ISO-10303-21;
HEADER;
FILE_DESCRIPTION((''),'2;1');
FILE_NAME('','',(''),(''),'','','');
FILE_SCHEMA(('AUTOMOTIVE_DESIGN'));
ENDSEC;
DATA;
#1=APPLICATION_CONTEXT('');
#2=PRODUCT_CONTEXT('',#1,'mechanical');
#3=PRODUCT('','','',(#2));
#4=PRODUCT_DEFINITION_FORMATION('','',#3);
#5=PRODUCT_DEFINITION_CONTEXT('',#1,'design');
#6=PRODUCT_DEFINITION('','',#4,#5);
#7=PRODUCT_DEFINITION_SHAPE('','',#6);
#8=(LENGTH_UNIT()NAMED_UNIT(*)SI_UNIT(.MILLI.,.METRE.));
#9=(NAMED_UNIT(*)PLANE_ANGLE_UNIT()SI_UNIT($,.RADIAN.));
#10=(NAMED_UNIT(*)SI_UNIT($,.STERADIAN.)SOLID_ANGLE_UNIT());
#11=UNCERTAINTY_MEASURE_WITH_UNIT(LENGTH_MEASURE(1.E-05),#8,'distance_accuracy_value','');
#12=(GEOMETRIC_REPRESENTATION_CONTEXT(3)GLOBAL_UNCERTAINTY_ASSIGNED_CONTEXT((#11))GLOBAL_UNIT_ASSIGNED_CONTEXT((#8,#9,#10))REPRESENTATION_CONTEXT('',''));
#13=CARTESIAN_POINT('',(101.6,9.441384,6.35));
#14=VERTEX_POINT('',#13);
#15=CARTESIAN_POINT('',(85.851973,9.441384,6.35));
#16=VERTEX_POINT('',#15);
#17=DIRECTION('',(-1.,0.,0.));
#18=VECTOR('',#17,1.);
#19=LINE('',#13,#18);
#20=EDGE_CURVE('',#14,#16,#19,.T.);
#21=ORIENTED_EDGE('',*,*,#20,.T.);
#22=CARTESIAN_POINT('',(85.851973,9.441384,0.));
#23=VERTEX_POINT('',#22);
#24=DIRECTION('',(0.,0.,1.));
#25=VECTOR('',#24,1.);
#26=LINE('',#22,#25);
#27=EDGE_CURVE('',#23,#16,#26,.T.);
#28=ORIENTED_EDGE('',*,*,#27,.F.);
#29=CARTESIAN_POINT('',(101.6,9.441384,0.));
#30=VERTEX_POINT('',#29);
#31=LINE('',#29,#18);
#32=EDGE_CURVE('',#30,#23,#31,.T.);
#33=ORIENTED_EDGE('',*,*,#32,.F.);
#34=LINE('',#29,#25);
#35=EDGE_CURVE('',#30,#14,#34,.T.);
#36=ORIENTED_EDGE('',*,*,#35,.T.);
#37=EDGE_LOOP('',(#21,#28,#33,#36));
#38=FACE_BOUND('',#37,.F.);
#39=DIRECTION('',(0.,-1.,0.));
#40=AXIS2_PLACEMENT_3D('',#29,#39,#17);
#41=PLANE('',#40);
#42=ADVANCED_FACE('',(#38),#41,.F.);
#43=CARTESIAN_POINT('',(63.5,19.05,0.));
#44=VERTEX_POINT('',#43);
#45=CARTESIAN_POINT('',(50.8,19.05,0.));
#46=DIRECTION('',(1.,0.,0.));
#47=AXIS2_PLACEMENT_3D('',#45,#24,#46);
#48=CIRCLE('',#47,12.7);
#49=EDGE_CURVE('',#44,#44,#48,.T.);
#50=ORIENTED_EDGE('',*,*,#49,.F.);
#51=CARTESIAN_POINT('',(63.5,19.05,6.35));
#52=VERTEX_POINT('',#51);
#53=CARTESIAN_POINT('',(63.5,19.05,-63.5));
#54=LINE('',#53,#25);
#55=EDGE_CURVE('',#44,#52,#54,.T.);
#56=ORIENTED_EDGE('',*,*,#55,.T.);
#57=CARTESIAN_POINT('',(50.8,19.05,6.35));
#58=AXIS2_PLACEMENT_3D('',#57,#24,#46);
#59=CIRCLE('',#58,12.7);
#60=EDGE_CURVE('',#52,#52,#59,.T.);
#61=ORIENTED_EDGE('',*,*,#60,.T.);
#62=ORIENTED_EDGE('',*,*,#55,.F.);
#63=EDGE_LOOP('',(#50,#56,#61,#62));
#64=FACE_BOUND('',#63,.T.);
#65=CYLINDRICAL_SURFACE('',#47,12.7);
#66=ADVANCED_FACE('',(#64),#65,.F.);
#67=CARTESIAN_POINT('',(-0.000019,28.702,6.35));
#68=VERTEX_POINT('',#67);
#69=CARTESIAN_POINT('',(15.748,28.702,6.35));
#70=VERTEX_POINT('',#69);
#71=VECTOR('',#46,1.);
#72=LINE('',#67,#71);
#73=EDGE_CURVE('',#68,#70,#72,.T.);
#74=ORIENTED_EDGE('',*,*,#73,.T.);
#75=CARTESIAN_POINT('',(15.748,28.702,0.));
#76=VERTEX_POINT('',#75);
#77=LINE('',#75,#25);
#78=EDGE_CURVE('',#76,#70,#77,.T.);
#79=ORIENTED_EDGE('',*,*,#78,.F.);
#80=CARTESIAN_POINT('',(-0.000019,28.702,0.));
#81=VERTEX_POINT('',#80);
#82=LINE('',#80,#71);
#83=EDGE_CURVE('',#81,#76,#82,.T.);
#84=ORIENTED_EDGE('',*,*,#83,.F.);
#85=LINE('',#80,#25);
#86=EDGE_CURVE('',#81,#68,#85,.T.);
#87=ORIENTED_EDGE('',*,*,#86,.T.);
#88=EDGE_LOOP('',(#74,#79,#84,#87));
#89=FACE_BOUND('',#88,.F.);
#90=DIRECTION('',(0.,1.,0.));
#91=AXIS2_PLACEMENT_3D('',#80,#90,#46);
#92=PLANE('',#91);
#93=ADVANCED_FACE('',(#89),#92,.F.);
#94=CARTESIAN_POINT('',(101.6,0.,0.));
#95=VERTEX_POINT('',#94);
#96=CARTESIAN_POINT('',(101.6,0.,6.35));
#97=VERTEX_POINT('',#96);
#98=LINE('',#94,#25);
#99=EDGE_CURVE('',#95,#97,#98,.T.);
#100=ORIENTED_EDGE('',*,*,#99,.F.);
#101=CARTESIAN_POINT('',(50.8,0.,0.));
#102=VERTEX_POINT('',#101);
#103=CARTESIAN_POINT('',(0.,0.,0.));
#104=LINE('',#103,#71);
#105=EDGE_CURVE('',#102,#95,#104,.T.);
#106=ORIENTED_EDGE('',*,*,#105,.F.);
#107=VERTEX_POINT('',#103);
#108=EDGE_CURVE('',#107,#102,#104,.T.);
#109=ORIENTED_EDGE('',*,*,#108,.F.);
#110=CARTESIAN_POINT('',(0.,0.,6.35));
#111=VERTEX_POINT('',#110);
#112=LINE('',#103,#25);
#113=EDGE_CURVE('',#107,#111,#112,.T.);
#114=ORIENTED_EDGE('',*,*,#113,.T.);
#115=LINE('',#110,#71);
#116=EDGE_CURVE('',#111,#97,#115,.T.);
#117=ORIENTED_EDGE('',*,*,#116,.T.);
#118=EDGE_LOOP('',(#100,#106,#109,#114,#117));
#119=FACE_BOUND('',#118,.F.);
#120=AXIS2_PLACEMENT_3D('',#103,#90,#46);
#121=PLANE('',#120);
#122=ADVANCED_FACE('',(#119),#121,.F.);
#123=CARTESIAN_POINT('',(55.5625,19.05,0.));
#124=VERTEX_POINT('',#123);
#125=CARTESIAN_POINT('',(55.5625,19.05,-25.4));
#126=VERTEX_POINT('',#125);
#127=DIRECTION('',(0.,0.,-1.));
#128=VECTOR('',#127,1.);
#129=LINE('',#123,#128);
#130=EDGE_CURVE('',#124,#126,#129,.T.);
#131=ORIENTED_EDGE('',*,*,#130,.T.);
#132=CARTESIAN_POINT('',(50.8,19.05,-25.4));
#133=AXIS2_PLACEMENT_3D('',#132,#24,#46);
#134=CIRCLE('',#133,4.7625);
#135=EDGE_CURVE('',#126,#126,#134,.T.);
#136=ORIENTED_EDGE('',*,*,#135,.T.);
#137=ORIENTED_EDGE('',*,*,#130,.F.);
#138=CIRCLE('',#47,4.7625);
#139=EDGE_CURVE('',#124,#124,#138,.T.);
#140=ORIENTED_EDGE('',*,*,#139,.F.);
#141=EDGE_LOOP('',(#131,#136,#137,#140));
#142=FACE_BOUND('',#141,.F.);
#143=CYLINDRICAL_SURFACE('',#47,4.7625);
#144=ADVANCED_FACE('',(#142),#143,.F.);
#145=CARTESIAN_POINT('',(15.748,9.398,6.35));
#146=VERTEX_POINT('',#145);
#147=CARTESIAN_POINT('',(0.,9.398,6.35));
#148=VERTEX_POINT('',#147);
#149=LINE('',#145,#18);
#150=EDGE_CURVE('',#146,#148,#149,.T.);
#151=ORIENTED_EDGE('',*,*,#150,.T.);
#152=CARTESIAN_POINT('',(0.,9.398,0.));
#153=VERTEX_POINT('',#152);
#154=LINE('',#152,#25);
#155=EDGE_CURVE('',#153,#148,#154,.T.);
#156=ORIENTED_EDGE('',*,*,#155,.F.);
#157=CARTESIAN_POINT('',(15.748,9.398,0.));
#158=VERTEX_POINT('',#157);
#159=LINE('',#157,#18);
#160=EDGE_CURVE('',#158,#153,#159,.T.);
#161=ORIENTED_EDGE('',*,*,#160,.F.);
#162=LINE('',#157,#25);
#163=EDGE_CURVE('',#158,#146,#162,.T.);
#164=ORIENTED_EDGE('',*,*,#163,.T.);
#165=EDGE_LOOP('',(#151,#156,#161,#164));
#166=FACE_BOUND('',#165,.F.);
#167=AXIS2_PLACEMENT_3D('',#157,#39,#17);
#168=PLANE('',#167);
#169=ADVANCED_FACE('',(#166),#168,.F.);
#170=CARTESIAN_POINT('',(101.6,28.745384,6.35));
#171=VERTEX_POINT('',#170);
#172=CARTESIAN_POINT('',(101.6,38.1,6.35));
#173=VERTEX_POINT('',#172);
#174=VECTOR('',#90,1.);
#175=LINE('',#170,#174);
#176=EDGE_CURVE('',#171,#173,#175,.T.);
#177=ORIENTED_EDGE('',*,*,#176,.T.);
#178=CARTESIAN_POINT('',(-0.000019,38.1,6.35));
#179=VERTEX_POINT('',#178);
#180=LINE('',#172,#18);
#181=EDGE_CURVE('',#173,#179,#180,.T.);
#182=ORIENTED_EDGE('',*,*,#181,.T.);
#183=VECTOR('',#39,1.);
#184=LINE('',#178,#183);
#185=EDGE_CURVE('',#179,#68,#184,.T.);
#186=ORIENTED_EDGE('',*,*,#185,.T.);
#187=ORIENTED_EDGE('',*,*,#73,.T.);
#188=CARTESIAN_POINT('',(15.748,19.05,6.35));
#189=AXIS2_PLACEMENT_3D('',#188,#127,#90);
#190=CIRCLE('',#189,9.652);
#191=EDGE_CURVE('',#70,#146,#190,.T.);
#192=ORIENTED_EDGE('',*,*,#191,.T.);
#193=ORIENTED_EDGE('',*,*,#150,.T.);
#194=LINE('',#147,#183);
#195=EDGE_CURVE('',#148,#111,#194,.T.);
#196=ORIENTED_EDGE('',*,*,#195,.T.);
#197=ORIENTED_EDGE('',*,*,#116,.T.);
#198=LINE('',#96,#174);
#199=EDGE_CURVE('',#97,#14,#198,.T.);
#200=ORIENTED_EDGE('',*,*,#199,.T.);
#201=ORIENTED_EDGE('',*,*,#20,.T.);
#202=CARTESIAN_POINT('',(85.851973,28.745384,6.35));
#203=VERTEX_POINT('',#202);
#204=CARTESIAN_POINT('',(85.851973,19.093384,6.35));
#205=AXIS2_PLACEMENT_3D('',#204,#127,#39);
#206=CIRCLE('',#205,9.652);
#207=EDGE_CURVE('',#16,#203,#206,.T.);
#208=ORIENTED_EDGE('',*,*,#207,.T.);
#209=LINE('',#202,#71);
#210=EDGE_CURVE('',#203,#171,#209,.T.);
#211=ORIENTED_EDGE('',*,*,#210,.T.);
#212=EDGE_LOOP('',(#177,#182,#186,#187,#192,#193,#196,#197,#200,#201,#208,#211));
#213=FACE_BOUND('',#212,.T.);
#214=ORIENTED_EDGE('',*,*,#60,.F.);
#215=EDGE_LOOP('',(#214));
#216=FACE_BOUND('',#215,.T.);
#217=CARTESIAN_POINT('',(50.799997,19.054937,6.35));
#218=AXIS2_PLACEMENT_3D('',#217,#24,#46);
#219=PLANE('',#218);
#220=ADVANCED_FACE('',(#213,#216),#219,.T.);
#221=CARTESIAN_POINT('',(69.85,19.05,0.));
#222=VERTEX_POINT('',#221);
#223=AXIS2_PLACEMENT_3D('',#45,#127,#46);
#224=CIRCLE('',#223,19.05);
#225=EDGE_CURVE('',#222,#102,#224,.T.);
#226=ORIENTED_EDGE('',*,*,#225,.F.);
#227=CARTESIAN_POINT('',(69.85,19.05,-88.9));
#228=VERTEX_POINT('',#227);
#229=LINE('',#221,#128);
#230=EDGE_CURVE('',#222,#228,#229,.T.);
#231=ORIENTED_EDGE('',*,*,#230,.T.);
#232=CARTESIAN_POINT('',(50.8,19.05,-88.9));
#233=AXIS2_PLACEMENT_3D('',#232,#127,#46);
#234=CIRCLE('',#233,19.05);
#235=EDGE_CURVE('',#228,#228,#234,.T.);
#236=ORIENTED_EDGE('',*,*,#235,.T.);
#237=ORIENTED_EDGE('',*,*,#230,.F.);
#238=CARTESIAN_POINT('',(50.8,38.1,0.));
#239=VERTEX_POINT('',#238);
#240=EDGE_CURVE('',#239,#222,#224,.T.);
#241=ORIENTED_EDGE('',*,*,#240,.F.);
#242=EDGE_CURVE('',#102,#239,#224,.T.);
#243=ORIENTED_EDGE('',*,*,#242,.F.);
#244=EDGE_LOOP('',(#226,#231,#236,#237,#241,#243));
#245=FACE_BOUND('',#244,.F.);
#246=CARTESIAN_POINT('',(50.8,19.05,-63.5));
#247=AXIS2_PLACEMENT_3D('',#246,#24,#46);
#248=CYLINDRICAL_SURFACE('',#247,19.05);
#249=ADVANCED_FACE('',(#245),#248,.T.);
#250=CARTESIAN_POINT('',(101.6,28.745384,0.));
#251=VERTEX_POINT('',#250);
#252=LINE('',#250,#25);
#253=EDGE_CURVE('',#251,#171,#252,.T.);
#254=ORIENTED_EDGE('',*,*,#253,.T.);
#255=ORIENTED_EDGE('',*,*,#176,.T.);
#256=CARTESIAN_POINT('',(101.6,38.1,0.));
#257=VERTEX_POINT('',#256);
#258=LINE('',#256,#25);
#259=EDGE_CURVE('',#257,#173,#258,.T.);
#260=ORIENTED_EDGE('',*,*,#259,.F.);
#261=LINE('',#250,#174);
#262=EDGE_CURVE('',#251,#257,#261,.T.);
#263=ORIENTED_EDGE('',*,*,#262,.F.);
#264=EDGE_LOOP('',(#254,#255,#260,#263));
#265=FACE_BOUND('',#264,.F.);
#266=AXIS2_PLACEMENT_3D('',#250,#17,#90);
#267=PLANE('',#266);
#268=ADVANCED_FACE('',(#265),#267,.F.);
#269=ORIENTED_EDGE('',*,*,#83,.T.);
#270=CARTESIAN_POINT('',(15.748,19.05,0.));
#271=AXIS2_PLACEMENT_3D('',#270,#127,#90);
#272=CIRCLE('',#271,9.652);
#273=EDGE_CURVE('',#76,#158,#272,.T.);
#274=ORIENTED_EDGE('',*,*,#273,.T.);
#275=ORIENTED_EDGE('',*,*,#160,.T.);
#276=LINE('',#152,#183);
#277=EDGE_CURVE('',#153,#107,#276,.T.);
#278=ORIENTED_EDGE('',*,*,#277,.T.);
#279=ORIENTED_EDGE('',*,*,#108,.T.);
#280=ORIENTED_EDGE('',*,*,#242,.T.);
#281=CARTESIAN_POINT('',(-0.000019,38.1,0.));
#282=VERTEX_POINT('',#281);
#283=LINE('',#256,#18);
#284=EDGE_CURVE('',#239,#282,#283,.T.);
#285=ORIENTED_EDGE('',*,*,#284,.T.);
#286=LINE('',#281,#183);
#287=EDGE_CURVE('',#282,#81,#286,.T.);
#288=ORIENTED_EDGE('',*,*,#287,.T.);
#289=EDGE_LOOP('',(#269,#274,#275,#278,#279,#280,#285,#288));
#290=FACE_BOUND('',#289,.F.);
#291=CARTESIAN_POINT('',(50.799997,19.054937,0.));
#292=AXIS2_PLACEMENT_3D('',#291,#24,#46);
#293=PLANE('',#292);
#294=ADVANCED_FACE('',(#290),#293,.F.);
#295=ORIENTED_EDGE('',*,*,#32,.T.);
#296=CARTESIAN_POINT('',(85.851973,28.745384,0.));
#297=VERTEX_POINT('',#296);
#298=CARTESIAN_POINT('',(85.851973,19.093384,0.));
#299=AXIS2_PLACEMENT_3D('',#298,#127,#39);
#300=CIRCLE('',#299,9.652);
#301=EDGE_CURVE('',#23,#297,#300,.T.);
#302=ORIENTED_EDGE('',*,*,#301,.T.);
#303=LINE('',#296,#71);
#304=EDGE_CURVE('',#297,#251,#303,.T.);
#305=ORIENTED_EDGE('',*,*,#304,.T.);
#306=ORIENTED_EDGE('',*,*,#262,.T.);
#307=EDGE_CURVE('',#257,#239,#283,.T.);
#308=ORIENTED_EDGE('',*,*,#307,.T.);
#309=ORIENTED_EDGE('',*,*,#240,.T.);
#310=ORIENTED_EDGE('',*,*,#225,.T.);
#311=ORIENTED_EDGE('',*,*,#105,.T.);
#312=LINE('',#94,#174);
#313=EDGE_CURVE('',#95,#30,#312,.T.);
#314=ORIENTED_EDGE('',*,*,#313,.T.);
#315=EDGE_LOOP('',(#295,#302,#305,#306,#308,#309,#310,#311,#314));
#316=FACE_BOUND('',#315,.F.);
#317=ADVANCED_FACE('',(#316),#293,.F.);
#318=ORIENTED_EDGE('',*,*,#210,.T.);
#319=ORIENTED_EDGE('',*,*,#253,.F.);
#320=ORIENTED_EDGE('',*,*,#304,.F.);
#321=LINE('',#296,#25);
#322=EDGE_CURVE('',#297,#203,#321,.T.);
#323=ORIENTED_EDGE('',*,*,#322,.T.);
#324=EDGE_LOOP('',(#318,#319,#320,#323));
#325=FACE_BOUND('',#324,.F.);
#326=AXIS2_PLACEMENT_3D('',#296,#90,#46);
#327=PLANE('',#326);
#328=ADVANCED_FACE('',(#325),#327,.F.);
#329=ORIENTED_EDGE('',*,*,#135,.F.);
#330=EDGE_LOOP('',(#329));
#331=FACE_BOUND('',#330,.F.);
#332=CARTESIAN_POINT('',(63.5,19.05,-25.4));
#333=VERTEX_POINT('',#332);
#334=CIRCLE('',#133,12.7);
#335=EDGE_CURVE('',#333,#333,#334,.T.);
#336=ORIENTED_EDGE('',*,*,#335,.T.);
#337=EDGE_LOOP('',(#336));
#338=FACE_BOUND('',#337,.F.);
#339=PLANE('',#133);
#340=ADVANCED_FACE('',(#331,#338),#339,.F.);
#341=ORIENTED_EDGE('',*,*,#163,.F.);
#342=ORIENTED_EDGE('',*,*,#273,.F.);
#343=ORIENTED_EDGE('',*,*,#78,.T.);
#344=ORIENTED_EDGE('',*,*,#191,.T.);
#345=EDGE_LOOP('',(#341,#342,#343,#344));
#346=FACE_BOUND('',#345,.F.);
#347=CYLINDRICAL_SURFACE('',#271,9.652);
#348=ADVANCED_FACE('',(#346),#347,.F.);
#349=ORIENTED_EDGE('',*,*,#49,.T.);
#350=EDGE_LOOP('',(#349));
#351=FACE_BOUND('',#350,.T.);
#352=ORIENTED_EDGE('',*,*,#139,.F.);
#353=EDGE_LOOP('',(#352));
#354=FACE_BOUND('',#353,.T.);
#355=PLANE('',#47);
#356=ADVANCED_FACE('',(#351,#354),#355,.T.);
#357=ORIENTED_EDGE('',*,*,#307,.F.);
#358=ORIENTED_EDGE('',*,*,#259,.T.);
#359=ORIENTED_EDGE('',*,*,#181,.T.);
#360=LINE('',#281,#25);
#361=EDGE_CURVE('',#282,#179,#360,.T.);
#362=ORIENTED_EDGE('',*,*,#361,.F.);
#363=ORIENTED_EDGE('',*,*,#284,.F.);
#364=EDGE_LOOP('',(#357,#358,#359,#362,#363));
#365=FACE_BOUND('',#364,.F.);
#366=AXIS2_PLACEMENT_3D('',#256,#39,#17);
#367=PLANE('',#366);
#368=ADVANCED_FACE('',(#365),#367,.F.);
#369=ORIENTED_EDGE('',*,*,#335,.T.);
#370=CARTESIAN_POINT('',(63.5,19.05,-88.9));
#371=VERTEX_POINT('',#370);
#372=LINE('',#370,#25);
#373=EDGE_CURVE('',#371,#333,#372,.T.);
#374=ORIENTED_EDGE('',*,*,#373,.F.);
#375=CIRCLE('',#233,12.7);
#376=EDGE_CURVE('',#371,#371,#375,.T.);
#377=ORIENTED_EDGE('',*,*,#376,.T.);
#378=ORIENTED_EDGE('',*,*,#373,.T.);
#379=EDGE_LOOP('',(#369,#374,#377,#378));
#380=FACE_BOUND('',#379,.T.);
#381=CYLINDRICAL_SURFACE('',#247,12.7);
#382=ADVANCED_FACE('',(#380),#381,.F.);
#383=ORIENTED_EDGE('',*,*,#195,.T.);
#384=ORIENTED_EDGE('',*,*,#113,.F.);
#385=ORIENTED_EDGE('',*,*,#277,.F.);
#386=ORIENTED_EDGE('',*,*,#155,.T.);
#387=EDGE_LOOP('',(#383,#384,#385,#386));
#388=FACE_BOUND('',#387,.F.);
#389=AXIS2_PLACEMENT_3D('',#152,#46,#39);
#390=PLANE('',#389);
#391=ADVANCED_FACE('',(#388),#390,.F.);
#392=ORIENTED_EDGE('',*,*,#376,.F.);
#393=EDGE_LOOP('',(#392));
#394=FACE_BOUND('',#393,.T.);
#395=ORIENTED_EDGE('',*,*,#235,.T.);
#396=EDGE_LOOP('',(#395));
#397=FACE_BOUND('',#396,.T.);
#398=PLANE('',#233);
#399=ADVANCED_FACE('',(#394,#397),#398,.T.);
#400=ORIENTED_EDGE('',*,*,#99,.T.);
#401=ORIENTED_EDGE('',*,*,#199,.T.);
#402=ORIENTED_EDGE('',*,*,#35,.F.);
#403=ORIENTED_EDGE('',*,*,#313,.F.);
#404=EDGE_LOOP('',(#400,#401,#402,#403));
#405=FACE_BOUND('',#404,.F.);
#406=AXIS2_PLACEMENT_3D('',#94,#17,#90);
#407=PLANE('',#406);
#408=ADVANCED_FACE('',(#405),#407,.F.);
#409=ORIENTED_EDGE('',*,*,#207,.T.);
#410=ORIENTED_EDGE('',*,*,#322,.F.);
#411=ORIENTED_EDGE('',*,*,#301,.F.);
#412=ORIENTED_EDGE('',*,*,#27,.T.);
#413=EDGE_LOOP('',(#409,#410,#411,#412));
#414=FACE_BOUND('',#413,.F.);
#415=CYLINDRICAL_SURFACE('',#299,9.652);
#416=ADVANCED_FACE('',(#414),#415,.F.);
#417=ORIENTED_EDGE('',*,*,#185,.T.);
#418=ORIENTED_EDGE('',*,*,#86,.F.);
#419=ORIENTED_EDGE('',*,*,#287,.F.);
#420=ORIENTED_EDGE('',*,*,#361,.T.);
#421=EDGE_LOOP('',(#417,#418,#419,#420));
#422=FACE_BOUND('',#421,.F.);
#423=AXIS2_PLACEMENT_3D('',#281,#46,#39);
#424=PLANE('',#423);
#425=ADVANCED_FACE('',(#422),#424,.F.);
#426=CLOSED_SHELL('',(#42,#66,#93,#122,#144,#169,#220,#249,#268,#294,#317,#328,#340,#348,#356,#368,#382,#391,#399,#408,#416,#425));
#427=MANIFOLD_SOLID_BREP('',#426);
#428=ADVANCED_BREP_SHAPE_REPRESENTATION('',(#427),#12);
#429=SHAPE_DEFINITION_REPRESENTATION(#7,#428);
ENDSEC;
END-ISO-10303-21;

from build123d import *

# Parameters (mm, degrees)
F0_R        = 12.7
F1_DEPTH    = 6.35
F2_R        = 12.7
F3_DEPTH    = 63.5
F3_FACE_R   = 19.05
F3_FACE_R_2 = 12.7
F4_R        = 19.05
F4_R_2      = 4.7625
F5_DEPTH    = 25.4


with BuildPart() as f1:
    # F0 (on Top) → F1 (new body)
    with BuildSketch(Plane.XY):
        with BuildLine():
            Line((0, 9.398), (0, 0))
            Line((0, 0), (101.6, 0))
            Line((101.6, 0), (101.6, 9.4413837329))
            Line((101.6, 9.4413837329), (85.851973152, 9.4413837329))
            ThreePointArc((85.851973152, 9.4413837329), (76.199973152, 19.0933837329), (85.851973152, 28.7453837329))
            Line((85.851973152, 28.7453837329), (101.6, 28.7453837329))
            Line((101.6, 28.7453837329), (101.6, 38.1))
            Line((101.6, 38.1), (50.7999907375, 38.1))
            Line((50.7999907375, 38.1), (-1.85251e-05, 38.1))
            Line((-1.85251e-05, 38.1), (-1.85251e-05, 28.702))
            Line((-1.85251e-05, 28.702), (15.748, 28.702))
            ThreePointArc((15.748, 28.702), (25.4, 19.05), (15.748, 9.398))
            Line((15.748, 9.398), (0, 9.398))
        make_face()
        with Locations((50.8, 19.05)):
            Circle(F0_R, mode=Mode.SUBTRACT)
    extrude(amount=F1_DEPTH)

    # F2 (on face) → F3 (join)
    with BuildSketch(Plane(origin=(0, 0, 0), x_dir=(1, 0, 0), z_dir=(0, 0, -1))):
        with BuildLine():
            ThreePointArc((50.8, -38.1), (64.2703841816, -32.5203841816), (69.85, -19.05))
            ThreePointArc((69.85, -19.05), (64.2703841816, -5.5796158184), (50.8, 0))
            ThreePointArc((50.8, 0), (31.75, -19.05), (50.8, -38.1))
        make_face()
        with Locations((50.8, -19.05)):
            Circle(F2_R, mode=Mode.SUBTRACT)
    extrude(amount=F3_DEPTH)

    # F3_face (on face) + F4 (on Top) → F5 (join)
    with BuildSketch(Plane(origin=(50.8, 19.05, -63.5), x_dir=(1, 0, 0), z_dir=(0, 0, -1))):
        Circle(F3_FACE_R)
        Circle(F3_FACE_R_2, mode=Mode.SUBTRACT)
    with BuildSketch(Plane.XY):
        with Locations((50.8, 19.05)):
            Circle(F4_R)
        with Locations((50.8, 19.05)):
            Circle(F4_R_2, mode=Mode.SUBTRACT)
    extrude(amount=F5_DEPTH, dir=(0, 0, -1))


solid = f1.part
